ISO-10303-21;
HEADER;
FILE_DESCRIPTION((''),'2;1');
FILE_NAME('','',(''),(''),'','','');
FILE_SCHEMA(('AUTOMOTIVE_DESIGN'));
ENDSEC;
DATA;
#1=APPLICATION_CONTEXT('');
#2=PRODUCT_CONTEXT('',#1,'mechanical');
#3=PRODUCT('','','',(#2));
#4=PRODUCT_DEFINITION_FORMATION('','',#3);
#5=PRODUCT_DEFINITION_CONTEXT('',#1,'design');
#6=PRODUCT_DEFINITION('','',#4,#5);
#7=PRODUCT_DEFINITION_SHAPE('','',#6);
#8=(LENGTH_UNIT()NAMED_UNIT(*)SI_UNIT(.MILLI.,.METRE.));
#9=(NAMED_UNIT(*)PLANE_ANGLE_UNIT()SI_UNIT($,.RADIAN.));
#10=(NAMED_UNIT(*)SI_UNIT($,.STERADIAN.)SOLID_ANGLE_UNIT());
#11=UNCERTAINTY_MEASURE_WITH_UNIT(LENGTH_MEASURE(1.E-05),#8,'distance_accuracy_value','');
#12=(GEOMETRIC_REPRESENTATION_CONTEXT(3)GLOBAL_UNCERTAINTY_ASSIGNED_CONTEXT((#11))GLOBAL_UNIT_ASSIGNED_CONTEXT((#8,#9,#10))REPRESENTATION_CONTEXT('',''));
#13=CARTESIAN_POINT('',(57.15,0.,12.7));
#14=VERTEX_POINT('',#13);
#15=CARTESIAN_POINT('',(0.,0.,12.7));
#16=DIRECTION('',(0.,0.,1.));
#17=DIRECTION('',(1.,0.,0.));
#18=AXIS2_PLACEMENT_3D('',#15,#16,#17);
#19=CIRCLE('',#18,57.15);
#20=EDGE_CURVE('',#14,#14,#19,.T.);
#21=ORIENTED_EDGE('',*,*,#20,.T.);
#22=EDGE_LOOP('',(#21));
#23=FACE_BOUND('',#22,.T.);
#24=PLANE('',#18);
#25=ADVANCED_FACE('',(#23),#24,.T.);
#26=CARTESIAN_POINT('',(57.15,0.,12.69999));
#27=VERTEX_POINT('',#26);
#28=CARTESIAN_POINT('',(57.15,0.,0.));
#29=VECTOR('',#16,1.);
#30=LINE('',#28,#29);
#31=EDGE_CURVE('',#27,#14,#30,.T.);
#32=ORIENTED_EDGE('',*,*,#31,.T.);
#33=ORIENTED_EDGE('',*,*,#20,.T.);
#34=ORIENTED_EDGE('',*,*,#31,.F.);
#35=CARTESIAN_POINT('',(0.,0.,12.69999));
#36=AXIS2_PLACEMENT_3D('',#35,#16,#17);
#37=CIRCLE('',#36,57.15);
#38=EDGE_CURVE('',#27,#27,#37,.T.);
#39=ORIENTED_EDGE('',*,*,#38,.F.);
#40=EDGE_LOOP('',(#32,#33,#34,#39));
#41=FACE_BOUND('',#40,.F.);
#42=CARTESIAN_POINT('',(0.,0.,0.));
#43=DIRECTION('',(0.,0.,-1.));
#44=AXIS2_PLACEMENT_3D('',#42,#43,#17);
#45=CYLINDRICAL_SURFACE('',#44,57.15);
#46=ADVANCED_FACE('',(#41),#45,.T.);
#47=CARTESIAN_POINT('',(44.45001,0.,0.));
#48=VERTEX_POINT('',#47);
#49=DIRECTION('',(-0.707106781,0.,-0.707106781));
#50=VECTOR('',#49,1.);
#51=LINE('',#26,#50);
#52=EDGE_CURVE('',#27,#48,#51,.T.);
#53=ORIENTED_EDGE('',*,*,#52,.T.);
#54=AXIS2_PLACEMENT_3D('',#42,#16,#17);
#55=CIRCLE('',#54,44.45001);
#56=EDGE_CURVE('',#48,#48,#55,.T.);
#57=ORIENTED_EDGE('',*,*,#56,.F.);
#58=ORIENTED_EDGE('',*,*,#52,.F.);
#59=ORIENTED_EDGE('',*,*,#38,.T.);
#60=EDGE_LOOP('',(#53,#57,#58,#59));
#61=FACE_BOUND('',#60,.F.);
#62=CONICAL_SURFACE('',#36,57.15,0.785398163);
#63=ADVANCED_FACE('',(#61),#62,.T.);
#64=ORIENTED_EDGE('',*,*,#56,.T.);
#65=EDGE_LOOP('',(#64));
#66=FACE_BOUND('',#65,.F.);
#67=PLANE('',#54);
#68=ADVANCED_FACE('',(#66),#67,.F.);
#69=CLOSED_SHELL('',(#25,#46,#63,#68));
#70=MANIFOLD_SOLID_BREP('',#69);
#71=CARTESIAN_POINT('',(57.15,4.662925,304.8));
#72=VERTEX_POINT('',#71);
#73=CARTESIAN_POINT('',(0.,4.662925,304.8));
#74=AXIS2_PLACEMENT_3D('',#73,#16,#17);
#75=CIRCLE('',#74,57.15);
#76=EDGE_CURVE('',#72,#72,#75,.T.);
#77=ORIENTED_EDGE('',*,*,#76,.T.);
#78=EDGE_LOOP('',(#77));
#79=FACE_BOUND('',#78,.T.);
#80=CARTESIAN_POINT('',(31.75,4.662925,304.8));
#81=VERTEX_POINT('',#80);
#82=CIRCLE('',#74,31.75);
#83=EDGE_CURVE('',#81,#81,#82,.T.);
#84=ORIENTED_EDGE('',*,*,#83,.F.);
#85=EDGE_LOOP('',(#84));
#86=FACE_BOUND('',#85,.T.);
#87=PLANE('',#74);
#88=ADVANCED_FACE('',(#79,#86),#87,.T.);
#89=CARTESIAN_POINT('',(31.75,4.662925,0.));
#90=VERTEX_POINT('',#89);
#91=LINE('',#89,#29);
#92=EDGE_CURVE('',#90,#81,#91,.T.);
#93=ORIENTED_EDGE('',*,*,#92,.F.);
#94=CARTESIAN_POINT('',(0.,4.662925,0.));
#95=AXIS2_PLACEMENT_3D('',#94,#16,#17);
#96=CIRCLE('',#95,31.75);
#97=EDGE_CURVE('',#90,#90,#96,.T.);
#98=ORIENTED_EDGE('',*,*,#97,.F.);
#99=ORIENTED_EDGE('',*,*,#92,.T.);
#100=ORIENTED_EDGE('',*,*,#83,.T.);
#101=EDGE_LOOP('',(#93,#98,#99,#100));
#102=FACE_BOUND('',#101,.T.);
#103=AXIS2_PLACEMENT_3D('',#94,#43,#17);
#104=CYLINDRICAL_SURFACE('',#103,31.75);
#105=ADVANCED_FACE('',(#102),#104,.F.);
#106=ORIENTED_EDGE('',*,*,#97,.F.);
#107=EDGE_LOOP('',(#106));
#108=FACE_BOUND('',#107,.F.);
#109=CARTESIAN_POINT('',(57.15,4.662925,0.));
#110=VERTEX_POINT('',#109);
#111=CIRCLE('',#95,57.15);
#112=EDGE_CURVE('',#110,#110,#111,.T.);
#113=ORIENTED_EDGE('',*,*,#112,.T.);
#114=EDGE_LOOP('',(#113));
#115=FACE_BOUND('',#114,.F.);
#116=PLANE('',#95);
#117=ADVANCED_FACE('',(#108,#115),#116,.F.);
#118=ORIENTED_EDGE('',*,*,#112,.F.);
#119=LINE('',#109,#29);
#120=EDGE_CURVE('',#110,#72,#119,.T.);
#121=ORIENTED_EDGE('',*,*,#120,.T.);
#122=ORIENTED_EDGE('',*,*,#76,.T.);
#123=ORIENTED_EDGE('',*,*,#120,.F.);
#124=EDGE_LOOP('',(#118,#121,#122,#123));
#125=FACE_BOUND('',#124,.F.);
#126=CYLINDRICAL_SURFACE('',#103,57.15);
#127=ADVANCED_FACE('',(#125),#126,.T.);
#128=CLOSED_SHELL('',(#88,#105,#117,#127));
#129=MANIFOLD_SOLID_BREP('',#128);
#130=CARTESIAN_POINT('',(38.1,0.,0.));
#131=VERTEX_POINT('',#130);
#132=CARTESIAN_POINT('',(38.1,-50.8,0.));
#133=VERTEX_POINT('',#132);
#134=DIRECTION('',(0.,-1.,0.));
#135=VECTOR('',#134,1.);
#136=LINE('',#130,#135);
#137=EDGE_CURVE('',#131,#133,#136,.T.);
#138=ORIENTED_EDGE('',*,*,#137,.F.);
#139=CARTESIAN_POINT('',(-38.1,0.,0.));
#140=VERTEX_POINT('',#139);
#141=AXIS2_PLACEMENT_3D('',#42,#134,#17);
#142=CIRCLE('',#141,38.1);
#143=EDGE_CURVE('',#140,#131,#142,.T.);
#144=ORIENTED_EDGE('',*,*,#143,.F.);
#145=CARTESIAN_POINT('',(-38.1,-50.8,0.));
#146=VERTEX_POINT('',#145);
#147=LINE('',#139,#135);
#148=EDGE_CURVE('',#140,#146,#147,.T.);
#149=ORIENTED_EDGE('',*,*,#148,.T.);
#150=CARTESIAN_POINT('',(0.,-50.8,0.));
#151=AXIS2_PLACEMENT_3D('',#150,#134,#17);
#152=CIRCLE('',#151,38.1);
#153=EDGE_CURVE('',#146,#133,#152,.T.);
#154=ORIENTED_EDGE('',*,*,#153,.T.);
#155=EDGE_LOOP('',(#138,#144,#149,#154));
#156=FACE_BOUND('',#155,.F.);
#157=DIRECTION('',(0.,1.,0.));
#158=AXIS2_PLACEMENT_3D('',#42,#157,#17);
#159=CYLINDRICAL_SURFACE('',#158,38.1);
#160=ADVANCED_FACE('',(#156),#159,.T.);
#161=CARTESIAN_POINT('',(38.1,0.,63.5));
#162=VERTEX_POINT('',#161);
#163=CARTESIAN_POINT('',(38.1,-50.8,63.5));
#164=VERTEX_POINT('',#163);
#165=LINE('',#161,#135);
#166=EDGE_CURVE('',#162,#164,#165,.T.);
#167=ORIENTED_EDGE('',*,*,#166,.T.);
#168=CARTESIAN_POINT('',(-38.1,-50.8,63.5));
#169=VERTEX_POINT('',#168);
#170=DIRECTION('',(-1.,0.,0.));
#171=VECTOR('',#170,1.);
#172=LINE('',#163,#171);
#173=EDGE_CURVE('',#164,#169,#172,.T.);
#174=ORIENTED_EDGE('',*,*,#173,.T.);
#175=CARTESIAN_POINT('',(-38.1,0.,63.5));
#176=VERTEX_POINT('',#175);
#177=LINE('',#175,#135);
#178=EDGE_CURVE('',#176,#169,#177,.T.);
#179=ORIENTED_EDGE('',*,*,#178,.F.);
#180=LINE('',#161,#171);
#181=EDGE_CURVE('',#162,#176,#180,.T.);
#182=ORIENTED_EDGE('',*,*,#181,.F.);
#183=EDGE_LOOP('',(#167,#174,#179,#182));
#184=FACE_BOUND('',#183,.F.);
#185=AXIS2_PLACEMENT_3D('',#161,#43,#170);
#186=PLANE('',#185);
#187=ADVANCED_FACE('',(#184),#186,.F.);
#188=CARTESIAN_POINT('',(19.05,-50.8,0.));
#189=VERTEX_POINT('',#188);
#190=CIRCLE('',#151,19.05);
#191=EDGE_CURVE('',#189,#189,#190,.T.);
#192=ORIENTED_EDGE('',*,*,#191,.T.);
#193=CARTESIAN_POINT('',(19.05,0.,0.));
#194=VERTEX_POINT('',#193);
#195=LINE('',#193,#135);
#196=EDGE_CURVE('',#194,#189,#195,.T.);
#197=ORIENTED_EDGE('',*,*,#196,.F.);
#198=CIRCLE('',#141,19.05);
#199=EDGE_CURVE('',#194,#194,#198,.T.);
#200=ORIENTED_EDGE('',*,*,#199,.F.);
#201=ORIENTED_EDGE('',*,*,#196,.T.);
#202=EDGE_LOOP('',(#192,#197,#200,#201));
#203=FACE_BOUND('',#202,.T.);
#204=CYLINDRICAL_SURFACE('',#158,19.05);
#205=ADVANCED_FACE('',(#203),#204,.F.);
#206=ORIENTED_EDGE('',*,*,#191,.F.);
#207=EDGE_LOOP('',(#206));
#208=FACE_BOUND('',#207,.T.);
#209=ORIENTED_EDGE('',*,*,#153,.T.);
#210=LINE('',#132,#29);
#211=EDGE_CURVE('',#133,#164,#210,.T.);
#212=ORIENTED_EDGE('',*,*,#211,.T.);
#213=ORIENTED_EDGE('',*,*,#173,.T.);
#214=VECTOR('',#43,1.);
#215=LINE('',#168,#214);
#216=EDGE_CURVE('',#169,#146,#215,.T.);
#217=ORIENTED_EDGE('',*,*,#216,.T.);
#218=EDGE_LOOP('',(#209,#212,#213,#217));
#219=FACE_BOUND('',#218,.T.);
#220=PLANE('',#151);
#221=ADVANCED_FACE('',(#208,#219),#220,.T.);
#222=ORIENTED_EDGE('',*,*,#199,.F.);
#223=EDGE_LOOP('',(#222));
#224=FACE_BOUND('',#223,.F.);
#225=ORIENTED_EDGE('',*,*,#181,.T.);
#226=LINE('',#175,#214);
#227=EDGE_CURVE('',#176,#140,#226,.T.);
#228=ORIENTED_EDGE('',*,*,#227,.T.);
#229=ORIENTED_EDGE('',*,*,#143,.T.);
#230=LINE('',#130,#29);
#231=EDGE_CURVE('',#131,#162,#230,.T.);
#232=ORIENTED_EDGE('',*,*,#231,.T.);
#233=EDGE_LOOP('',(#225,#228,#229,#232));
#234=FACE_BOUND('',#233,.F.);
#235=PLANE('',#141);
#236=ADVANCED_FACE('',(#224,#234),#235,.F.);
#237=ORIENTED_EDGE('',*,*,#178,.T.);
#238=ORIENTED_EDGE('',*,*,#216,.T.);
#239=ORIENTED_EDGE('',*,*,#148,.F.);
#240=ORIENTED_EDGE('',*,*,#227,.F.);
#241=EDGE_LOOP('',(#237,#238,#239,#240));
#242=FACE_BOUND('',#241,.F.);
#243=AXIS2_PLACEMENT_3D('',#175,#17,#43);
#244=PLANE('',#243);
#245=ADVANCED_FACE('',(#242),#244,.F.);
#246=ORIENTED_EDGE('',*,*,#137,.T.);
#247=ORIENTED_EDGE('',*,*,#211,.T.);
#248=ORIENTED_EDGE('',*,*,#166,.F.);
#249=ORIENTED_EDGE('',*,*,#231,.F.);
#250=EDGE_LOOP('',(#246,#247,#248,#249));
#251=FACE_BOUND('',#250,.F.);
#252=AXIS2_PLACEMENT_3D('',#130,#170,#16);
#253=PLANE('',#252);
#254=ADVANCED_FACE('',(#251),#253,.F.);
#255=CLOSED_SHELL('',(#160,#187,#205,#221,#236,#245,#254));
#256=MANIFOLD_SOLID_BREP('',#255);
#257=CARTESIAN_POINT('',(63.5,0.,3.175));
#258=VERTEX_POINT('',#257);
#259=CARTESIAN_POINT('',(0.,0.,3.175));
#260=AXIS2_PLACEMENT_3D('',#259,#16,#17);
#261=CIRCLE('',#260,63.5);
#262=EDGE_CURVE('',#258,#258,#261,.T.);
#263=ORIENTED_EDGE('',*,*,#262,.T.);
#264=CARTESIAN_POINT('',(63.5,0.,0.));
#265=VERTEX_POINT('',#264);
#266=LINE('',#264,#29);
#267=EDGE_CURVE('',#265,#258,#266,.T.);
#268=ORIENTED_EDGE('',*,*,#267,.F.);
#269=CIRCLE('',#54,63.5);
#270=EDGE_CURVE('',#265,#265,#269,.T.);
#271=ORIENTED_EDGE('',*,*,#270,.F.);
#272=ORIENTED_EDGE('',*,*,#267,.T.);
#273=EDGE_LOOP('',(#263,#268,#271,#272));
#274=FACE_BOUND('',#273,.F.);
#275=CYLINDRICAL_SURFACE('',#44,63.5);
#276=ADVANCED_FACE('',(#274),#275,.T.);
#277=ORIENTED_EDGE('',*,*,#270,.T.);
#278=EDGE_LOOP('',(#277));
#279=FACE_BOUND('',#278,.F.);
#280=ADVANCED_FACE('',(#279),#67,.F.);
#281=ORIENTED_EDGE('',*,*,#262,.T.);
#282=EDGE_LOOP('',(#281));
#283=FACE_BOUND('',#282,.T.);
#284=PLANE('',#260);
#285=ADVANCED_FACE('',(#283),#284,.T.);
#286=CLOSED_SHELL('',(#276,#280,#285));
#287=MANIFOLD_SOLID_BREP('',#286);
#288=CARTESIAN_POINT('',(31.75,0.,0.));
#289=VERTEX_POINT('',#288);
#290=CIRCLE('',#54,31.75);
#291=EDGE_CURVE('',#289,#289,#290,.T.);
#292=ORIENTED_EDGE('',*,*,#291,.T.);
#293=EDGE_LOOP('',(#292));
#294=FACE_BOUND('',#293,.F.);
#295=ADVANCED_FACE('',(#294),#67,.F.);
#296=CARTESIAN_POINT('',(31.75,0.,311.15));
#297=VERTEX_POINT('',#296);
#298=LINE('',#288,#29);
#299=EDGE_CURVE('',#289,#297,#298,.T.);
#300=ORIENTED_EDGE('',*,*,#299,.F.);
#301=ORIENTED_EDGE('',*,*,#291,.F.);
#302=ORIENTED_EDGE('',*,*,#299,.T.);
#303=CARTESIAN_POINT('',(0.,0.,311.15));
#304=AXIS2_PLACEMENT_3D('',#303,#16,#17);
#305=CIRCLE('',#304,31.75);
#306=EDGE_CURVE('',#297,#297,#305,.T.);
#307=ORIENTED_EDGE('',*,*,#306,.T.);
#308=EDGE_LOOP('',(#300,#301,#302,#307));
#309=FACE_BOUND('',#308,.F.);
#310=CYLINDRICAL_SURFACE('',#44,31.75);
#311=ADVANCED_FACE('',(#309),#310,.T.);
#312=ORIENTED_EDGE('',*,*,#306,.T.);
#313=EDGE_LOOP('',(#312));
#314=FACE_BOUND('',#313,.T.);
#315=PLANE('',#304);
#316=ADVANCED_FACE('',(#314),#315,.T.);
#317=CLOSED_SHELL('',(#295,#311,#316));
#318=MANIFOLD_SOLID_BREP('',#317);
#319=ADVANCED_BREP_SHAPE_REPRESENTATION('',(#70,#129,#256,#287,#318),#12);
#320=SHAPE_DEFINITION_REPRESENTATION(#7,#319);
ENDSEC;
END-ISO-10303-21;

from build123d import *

# Parameters (mm, degrees)
F0_R      = 19.05
F1_DEPTH  = 50.8
F2_R      = 57.15
F3_DEPTH  = 12.7
F4_SIZE   = 12.69999
F5_R      = 63.5
F6_DEPTH  = 3.175
F7_R      = 57.15
F7_R_2    = 31.75
F8_DEPTH  = 304.8
F9_R      = 31.75
F10_DEPTH = 311.15
F12_DEPTH = 12.7


# Not quite as in the source:
# - a fillet or chamfer is up to 0.001 mm smaller than in the source, because OpenCascade refuses the exact size


with BuildPart() as f1:
    # F0 (on Front) → F1 (new body)
    with BuildSketch(Plane.XZ):
        with BuildLine():
            ThreePointArc((-38.1, 0), (0, -38.1), (38.1, 0))
            ThreePointArc((38.1, 0), (0, 38.1), (-38.1, 0))
        make_face()
        Circle(F0_R, mode=Mode.SUBTRACT)
        with BuildLine():
            ThreePointArc((-38.1, 0), (0, 38.1), (38.1, 0))
            Line((38.1, 0), (38.1, 63.5))
            Line((38.1, 63.5), (-38.1, 63.5))
            Line((-38.1, 63.5), (-38.1, 0))
        make_face()
    extrude(amount=F1_DEPTH)


with BuildPart() as f3:
    # F2 (on Top) → F3 (new body)
    with BuildSketch(Plane.XY):
        Circle(F2_R)
    extrude(amount=F3_DEPTH)

    # F4 (size 12.7 in the source; OpenCascade refuses exactly that, so slightly less here)
    f4_edges = [f3.edges().sort_by_distance(p)[0] for p in [
        (-57.15, 0, 0),
    ]]
    chamfer(f4_edges, length=F4_SIZE)


with BuildPart() as f6:
    # F5 (on Top) → F6 (new body)
    with BuildSketch(Plane.XY):
        Circle(F5_R)
    extrude(amount=F6_DEPTH)


with BuildPart() as f8:
    # F7 (on Top) → F8 (new body)
    with BuildSketch(Plane.XY):
        with Locations((0, 4.6629247808)):
            Circle(F7_R)
        with Locations((0, 4.6629247808)):
            Circle(F7_R_2, mode=Mode.SUBTRACT)
    extrude(amount=F8_DEPTH)


with BuildPart() as f10:
    # F9 (on Top) → F10 (new body)
    with BuildSketch(Plane.XY):
        Circle(F9_R)
    extrude(amount=F10_DEPTH)


with BuildPart() as f12:
    # F11 (on Front) → F12 (new body)
    with BuildSketch(Plane.XZ):
        with BuildLine():
            Line((171.1853612941, 141.2297336433), (0, 31.75))
            ThreePointArc((0, 31.75), (-30.9973982261, -6.8719577425), (13.4181298103, -28.7752722384))
            Line((13.4181298103, -28.7752722384), (234.95, 0))
            Line((234.95, 0), (171.1853612941, 141.2297336433))
        make_face()
        with BuildLine():
            ThreePointArc((19.05, 0), (-13.4703841816, -13.4703841816), (0, 19.05))
            ThreePointArc((0, 19.05), (13.4703841816, 13.4703841816), (19.05, 0))
        make_face(mode=Mode.SUBTRACT)
    extrude(amount=F12_DEPTH)


solid = Compound([f1.part, f3.part, f6.part, f8.part, f10.part])
